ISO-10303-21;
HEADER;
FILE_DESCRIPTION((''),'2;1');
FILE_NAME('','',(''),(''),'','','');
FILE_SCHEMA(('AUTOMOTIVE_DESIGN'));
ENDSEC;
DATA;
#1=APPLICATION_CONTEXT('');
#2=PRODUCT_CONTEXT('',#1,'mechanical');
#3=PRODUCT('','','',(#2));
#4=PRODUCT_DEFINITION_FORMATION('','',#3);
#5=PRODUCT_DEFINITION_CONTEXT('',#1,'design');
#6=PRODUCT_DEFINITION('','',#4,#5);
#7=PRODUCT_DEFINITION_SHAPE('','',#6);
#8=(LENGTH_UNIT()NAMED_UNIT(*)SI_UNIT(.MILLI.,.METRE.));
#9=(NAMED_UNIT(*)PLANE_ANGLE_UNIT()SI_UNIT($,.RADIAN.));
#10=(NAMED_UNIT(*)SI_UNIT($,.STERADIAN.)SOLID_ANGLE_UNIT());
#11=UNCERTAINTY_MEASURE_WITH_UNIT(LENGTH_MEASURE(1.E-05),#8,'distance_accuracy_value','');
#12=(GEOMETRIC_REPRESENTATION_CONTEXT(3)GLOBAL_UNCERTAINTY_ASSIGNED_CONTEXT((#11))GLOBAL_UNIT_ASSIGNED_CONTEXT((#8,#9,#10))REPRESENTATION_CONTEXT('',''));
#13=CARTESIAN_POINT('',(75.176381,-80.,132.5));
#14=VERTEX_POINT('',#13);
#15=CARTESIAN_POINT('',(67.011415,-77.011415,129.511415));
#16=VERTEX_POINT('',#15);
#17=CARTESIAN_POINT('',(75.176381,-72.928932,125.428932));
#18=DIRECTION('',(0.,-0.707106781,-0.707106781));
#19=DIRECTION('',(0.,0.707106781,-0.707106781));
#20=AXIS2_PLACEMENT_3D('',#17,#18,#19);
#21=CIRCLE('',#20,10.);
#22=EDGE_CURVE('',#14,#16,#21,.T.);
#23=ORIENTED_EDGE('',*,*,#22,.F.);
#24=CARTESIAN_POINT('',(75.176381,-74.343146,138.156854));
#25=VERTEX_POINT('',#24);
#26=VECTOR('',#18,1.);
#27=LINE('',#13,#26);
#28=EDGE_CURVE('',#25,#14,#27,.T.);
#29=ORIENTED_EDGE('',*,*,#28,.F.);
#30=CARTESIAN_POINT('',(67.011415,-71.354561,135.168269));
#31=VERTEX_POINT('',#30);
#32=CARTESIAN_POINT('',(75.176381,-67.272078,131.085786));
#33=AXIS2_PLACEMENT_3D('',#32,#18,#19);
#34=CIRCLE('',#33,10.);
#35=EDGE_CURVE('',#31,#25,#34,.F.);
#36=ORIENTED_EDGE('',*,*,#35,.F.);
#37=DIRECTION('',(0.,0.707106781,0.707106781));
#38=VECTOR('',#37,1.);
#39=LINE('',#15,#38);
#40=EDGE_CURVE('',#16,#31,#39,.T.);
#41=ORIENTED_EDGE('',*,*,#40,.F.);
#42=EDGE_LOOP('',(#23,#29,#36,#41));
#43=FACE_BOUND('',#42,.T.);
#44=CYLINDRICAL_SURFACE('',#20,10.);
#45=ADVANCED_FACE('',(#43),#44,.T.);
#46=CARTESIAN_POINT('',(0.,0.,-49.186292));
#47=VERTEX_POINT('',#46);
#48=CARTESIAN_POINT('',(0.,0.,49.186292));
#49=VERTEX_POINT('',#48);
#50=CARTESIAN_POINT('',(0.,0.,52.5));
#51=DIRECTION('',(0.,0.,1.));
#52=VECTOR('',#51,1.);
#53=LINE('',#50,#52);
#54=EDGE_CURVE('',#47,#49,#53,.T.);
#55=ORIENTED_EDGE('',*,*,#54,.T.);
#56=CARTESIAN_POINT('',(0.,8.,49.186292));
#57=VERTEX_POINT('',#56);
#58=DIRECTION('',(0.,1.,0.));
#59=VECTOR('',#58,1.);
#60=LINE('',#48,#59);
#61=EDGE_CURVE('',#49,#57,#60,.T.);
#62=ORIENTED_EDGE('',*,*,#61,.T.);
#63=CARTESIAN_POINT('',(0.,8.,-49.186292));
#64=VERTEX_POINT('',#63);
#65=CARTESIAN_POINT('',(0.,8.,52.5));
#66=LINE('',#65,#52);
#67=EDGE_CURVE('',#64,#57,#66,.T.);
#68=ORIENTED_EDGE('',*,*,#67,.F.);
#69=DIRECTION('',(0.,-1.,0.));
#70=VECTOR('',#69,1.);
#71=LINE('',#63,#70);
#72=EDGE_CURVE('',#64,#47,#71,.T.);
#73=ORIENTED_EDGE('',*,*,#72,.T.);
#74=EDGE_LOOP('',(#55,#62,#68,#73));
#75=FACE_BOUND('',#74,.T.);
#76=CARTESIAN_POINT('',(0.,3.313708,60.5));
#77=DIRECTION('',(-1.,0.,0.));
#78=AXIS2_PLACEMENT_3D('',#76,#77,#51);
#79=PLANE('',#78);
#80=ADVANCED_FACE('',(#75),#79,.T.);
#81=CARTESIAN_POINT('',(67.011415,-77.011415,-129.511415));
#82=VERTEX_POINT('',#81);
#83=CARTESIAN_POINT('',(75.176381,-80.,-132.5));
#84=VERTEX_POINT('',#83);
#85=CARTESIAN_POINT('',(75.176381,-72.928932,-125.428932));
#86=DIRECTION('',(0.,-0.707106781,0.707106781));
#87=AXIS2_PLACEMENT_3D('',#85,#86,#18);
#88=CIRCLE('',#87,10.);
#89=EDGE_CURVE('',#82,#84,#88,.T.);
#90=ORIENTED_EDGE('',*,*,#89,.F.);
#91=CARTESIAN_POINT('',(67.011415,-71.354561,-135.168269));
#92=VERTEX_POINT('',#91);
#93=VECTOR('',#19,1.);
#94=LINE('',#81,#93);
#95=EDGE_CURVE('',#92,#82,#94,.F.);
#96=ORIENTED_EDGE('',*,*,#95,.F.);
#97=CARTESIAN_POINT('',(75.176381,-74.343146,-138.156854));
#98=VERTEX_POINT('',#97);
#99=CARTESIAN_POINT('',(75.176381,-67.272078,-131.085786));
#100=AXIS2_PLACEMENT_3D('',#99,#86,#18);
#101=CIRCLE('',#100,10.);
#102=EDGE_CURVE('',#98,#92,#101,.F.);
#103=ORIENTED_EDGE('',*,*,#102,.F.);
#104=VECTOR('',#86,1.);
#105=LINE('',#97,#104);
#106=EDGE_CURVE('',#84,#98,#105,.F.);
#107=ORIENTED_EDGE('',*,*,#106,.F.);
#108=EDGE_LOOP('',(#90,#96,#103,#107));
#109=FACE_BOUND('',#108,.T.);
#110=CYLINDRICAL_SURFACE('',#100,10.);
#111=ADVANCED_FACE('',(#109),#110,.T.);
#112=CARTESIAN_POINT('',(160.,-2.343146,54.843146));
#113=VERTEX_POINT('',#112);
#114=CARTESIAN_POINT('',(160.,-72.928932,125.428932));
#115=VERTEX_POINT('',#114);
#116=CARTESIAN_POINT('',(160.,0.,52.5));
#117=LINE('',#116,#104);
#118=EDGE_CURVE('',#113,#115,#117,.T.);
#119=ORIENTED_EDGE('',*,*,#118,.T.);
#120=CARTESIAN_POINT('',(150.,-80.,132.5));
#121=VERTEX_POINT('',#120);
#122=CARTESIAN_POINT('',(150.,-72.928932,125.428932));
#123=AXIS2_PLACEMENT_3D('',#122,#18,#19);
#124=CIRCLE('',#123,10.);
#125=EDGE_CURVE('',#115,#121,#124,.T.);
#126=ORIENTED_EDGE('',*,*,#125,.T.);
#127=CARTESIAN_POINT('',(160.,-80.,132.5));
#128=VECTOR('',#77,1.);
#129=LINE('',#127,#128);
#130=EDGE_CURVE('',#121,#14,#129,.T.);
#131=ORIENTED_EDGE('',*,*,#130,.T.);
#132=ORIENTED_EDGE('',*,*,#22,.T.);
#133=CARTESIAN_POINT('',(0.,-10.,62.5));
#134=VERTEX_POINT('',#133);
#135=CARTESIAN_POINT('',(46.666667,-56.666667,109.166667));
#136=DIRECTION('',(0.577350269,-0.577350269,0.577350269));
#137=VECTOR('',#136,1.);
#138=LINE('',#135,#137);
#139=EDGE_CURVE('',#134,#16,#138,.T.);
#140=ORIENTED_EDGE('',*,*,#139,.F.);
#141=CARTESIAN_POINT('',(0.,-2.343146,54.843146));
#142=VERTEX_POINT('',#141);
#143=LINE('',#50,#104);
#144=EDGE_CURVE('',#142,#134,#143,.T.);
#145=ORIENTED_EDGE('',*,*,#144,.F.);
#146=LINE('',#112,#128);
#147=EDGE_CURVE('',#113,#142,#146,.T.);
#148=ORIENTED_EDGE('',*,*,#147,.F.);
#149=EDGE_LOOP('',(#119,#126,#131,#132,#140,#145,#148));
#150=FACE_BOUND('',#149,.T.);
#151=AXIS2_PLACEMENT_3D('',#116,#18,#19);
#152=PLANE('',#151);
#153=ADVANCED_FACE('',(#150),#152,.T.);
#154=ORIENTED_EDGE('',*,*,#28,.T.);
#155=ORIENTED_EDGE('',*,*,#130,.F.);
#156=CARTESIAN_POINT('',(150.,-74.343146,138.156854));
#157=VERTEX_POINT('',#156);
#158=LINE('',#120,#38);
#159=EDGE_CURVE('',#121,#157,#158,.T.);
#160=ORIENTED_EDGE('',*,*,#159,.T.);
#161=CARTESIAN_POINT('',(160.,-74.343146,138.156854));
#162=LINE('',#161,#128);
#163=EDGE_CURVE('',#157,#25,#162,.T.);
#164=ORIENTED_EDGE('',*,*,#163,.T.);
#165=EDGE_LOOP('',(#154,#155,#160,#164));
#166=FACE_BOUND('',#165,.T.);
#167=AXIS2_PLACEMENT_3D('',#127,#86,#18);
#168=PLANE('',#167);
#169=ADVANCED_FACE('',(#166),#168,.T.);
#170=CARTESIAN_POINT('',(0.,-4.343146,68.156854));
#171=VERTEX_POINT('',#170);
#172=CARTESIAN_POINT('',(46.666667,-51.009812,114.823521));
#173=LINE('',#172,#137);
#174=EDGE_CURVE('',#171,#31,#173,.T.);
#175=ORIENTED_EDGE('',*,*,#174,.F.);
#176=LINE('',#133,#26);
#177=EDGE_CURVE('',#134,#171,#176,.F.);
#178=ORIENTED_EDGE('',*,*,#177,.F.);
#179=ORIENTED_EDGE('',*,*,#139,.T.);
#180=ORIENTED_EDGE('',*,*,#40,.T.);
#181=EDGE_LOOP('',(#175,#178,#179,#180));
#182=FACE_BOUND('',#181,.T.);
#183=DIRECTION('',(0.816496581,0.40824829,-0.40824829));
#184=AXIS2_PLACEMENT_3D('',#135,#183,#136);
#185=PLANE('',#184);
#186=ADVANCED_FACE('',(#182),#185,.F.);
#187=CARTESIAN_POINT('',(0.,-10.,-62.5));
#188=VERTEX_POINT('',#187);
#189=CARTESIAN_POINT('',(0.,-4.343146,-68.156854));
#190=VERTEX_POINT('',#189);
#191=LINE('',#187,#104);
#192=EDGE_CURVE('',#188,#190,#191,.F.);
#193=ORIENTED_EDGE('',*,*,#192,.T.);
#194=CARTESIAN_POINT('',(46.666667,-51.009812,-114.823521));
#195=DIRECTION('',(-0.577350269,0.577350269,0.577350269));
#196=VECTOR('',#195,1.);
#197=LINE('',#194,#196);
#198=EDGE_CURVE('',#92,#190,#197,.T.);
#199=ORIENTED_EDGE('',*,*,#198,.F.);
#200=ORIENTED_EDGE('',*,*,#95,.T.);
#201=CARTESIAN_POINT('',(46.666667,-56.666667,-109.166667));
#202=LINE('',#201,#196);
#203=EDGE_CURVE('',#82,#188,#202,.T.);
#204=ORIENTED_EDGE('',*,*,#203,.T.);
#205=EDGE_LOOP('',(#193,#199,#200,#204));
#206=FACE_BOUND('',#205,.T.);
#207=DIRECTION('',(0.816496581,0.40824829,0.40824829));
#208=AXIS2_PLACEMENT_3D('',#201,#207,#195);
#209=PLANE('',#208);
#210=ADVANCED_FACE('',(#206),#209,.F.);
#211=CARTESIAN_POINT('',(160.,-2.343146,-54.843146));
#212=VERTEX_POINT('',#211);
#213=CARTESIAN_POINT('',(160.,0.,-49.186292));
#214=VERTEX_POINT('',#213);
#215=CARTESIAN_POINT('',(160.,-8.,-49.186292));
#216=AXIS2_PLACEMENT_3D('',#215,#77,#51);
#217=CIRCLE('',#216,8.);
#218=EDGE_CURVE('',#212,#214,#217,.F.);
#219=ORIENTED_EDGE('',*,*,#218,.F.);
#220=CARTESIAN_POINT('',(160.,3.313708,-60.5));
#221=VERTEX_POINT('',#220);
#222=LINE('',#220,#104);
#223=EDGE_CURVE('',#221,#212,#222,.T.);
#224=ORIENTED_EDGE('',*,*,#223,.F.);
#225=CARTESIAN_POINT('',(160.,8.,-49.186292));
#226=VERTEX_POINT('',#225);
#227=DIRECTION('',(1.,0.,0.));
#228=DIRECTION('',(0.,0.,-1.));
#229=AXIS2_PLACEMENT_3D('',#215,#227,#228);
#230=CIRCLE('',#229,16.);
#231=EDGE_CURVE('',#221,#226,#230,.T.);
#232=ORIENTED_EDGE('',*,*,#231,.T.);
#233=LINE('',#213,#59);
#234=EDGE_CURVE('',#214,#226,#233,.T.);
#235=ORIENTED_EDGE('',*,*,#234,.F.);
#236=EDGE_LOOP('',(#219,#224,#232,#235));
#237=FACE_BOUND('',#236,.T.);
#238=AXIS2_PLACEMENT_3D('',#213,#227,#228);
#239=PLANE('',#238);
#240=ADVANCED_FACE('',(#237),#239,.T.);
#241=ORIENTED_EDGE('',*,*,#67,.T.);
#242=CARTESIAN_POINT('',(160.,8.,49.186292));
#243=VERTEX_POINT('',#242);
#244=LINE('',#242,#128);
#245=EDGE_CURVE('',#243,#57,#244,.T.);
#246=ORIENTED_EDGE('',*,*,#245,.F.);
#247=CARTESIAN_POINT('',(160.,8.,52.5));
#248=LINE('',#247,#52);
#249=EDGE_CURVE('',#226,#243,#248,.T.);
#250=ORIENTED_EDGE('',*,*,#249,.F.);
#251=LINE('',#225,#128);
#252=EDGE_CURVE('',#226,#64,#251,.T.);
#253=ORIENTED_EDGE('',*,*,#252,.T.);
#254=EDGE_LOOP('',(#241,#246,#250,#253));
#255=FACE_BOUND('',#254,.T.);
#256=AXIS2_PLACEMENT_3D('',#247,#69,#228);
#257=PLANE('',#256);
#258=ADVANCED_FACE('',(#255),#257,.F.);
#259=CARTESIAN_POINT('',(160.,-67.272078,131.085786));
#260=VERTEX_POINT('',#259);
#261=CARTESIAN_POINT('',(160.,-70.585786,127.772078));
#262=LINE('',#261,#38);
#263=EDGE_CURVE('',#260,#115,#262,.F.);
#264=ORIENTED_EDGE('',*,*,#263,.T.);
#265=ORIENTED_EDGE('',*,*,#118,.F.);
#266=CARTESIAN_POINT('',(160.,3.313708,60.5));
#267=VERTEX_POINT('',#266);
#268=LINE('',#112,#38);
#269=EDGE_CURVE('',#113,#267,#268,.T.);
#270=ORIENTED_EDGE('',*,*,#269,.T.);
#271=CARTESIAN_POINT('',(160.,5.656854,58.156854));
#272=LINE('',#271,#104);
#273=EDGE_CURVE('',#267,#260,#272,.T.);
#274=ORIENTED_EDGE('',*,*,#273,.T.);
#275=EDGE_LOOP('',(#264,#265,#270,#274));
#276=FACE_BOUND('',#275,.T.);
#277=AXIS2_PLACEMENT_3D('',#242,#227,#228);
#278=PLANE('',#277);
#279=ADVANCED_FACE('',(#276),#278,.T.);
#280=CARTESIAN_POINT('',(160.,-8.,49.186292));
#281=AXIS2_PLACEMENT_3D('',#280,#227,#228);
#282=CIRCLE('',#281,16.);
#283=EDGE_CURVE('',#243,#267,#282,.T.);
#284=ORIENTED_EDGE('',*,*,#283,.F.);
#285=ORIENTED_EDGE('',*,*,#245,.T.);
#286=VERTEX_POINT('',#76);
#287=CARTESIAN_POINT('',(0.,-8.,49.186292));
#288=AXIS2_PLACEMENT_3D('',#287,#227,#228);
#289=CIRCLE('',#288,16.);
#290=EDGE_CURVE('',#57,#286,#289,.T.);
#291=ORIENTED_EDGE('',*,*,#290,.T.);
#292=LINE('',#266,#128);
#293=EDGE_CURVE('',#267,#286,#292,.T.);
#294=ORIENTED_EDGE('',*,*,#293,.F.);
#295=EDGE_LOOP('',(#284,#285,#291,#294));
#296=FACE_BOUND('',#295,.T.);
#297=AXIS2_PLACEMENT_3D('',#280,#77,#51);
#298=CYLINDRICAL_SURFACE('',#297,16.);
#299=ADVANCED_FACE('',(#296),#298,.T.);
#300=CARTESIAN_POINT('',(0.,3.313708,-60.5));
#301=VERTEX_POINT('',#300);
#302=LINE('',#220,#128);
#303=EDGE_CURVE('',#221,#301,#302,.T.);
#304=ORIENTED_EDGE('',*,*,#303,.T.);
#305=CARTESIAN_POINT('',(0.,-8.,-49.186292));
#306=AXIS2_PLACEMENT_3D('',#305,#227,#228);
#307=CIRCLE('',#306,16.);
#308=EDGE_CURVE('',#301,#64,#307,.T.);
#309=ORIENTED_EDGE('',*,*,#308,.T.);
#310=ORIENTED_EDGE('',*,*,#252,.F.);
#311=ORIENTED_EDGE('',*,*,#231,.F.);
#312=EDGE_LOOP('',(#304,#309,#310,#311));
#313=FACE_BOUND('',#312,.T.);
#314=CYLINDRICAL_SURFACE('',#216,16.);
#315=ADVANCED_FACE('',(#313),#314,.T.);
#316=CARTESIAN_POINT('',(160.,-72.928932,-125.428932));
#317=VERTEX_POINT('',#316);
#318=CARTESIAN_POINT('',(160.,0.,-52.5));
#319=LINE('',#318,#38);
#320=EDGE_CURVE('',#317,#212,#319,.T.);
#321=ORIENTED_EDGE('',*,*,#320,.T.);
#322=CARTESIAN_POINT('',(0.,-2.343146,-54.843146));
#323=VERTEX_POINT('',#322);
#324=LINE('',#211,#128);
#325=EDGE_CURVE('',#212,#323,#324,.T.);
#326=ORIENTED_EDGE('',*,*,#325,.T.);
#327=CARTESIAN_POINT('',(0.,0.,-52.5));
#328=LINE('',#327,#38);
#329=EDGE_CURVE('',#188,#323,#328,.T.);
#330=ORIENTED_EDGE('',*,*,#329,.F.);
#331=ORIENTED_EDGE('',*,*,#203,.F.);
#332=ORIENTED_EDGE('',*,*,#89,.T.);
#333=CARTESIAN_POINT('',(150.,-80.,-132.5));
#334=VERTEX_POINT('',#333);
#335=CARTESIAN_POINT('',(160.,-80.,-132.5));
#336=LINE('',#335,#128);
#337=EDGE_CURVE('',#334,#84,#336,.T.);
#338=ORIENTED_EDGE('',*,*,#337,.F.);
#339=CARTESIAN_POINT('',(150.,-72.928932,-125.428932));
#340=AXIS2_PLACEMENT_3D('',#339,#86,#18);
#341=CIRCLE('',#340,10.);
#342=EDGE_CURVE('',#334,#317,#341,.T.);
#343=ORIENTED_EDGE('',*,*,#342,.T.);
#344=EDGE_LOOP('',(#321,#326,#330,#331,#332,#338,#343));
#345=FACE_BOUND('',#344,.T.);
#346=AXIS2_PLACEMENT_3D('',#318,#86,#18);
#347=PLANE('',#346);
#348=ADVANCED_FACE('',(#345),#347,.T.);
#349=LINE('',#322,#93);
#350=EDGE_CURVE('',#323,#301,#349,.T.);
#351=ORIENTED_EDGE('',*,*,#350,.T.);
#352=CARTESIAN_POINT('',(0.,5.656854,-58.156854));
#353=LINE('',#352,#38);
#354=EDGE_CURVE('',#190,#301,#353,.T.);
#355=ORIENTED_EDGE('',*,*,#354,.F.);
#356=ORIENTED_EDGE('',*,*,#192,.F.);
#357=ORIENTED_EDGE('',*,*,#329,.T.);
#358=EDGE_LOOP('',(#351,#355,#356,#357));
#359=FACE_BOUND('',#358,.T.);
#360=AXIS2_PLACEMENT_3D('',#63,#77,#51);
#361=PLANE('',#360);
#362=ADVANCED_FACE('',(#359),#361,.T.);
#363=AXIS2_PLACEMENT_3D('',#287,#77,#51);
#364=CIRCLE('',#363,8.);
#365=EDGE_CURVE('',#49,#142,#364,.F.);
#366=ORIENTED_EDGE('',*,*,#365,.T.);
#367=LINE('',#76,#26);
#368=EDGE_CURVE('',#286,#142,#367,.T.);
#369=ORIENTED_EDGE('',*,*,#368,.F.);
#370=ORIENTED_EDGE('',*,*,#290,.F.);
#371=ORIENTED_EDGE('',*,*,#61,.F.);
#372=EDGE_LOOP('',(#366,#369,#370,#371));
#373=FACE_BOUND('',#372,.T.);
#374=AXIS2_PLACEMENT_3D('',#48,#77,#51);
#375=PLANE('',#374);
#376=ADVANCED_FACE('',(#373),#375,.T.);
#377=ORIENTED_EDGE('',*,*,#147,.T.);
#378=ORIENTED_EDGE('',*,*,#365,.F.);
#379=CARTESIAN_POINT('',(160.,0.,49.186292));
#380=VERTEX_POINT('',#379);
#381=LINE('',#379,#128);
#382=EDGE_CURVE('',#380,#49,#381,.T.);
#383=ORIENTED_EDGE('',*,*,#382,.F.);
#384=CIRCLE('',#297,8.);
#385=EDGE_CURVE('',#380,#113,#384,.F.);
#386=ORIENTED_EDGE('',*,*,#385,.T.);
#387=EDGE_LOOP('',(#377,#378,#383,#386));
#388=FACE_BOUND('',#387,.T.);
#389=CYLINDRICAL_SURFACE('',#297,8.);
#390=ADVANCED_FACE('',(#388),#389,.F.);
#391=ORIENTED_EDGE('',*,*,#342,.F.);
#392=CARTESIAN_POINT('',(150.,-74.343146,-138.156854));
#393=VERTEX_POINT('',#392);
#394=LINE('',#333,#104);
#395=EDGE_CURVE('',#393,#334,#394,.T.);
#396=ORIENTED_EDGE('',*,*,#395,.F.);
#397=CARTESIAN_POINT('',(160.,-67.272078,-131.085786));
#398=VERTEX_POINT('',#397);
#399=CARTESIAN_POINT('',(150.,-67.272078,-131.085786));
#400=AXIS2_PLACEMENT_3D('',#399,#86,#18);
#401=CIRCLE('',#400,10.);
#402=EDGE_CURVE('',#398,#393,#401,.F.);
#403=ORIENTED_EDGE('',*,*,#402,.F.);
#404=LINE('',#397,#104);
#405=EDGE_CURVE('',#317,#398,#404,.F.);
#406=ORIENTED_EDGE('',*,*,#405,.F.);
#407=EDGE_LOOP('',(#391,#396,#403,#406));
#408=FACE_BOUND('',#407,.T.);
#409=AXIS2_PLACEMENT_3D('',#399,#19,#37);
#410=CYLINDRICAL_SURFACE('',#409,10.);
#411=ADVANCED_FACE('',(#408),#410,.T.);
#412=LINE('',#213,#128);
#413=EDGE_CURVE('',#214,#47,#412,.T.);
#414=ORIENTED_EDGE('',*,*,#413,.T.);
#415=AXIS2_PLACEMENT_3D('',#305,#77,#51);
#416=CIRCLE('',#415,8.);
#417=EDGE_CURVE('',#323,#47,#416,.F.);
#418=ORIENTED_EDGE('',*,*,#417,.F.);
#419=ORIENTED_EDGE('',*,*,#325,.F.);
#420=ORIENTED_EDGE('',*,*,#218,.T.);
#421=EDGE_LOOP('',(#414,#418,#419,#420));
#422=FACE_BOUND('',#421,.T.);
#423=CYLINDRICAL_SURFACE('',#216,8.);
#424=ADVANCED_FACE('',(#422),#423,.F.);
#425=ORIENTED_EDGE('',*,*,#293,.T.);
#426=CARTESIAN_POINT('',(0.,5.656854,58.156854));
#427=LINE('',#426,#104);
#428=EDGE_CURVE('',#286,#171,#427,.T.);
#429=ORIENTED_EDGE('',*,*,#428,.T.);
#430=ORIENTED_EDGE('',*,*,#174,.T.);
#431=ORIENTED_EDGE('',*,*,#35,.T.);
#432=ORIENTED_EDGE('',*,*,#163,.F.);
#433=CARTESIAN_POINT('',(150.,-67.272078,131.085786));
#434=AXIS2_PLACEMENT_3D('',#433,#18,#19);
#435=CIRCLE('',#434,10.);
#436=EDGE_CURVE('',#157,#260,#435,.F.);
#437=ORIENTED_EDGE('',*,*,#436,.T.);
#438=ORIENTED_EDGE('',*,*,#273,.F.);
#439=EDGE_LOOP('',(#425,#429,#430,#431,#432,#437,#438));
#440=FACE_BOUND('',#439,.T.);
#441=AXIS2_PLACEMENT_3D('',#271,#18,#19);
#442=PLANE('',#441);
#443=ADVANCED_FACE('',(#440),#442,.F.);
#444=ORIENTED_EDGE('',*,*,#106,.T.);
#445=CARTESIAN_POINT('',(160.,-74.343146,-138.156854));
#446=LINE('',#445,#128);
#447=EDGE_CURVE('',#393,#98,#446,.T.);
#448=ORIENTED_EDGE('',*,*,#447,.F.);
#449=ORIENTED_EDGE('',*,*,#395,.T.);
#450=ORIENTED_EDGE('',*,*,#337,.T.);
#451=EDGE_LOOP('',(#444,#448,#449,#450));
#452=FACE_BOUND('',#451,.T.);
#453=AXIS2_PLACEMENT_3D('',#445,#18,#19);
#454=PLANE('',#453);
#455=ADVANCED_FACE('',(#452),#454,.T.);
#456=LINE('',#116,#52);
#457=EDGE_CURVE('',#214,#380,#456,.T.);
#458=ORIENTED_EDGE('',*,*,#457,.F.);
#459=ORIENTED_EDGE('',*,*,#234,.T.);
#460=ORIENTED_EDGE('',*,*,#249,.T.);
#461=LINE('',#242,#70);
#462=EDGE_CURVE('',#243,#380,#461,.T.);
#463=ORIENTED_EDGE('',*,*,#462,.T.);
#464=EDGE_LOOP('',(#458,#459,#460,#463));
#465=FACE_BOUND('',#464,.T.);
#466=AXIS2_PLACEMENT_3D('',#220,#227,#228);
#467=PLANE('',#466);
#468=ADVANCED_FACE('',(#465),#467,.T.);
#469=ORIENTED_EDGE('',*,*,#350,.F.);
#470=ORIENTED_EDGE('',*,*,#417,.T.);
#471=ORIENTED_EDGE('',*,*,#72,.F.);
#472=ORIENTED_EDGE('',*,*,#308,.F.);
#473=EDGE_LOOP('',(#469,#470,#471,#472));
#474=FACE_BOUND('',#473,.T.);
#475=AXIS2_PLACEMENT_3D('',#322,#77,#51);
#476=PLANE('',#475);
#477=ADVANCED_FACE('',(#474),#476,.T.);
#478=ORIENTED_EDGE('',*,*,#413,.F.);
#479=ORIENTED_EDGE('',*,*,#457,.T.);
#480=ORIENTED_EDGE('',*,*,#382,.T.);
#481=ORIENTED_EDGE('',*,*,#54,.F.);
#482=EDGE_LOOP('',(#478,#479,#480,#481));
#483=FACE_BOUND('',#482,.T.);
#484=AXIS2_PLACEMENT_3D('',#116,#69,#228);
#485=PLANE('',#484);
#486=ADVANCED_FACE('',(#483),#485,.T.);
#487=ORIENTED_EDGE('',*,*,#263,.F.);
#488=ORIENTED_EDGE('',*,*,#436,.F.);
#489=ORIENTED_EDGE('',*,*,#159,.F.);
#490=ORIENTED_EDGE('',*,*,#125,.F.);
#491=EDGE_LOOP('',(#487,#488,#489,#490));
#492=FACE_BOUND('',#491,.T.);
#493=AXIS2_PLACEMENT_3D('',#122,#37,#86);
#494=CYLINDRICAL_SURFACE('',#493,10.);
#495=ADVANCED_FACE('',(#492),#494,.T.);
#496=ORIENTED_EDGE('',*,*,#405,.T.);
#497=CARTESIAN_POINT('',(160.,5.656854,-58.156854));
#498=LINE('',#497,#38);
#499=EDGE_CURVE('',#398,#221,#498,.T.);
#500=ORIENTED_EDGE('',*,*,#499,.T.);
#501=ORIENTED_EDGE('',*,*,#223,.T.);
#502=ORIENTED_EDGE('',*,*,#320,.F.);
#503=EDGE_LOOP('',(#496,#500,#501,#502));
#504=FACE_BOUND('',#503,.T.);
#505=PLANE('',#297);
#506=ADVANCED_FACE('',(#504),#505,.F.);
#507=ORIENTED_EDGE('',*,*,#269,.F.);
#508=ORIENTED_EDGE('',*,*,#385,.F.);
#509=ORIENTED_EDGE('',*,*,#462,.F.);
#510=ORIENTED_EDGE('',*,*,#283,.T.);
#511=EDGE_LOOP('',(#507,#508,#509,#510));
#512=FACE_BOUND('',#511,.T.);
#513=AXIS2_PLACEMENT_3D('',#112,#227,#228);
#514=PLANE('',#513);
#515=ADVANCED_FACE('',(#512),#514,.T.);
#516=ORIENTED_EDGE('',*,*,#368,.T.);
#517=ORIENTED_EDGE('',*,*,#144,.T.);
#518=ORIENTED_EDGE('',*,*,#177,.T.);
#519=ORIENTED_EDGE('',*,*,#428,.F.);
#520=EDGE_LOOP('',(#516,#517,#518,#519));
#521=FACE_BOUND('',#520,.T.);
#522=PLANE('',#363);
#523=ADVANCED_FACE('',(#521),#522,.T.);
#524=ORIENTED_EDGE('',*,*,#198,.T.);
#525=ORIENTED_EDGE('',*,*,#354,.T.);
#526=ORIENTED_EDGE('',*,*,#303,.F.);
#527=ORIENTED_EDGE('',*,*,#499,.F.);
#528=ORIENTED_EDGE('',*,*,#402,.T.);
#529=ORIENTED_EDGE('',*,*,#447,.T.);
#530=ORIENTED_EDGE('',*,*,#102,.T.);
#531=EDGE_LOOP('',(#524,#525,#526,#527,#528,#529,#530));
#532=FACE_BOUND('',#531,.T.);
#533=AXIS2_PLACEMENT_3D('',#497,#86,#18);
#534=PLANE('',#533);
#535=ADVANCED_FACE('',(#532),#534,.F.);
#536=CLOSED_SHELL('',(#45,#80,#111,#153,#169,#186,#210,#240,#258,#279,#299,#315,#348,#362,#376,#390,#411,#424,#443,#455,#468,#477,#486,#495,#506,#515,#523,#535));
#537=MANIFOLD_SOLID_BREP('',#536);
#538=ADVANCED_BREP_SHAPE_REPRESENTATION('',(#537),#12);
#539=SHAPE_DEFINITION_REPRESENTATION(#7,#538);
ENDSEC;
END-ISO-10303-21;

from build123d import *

# Parameters (mm, degrees)
SM_BASE_FLANGE_1_DEPTH = 160
CUT_EXTRUDE_START      = 3.884627654
CUT_EXTRUDE_1_DEPTH    = 98.974499311
FILLET_1_R             = 10


# Read off the part's stored shape, not the designer's step: 切除-拉伸1
# Sheet-metal steps are written as plain solids
with BuildPart() as part:
    # Sketch 1 → 基体-法兰1 (new body)
    with BuildSketch(Plane(origin=(0, 0, 0), x_dir=(0, 0, -1), z_dir=(1, 0, 0))):
        with BuildLine():
            Line((-132.5, -80), (-54.843145751, -2.343145751))
            ThreePointArc((-54.843145751, -2.343145751), (-52.24775896, -0.60896374), (-49.186291501, 0))
            Line((-49.186291501, 0), (49.186291501, 0))
            ThreePointArc((49.186291501, 0), (52.24775896, -0.60896374), (54.843145751, -2.343145751))
            Line((54.843145751, -2.343145751), (132.5, -80))
            Line((132.5, -80), (138.156854249, -74.343145751))
            Line((138.156854249, -74.343145751), (60.5, 3.313708499))
            ThreePointArc((60.5, 3.313708499), (55.309226419, 6.78207252), (49.186291501, 8))
            Line((49.186291501, 8), (-49.186291501, 8))
            ThreePointArc((-49.186291501, 8), (-55.309226419, 6.78207252), (-60.5, 3.313708499))
            Line((-60.5, 3.313708499), (-138.156854249, -74.343145751))
            Line((-138.156854249, -74.343145751), (-132.5, -80))
        make_face()
    extrude(amount=SM_BASE_FLANGE_1_DEPTH)

    # 切除-拉伸1 outline → 切除-拉伸1 (cut)
    with BuildSketch(Plane(origin=(0, 0, 0), x_dir=(0.8944271909999176, 0.4472135954999543, 0), z_dir=(0.4472135954999544, -0.8944271909999175, 0)).offset(CUT_EXTRUDE_START)):
        Polygon((-32.422985674, 0), (-4.472135955, 62.5), (29.362637858, 138.156854249), (30.186917696, 140), (-36, 140), (-36, 7.99844719), align=None)
        Polygon((-4.472135955, -62.5), (-32.422985674, 0), (-36, -7.99844719), (-36, -140), (30.186917696, -140), (29.362637858, -138.156854249), align=None)
    extrude(amount=CUT_EXTRUDE_1_DEPTH, mode=Mode.SUBTRACT)

    # 圆角1
    fillet_1_edges = [part.edges().sort_by_distance(p)[0] for p in [
        (160, -77.171572875, -135.328427125),
        (70, -77.171572875, 135.328427125),
        (70, -77.171572875, -135.328427125),
        (160, -77.171572875, 135.328427125),
    ]]
    fillet(fillet_1_edges, radius=FILLET_1_R)


solid = part.part
